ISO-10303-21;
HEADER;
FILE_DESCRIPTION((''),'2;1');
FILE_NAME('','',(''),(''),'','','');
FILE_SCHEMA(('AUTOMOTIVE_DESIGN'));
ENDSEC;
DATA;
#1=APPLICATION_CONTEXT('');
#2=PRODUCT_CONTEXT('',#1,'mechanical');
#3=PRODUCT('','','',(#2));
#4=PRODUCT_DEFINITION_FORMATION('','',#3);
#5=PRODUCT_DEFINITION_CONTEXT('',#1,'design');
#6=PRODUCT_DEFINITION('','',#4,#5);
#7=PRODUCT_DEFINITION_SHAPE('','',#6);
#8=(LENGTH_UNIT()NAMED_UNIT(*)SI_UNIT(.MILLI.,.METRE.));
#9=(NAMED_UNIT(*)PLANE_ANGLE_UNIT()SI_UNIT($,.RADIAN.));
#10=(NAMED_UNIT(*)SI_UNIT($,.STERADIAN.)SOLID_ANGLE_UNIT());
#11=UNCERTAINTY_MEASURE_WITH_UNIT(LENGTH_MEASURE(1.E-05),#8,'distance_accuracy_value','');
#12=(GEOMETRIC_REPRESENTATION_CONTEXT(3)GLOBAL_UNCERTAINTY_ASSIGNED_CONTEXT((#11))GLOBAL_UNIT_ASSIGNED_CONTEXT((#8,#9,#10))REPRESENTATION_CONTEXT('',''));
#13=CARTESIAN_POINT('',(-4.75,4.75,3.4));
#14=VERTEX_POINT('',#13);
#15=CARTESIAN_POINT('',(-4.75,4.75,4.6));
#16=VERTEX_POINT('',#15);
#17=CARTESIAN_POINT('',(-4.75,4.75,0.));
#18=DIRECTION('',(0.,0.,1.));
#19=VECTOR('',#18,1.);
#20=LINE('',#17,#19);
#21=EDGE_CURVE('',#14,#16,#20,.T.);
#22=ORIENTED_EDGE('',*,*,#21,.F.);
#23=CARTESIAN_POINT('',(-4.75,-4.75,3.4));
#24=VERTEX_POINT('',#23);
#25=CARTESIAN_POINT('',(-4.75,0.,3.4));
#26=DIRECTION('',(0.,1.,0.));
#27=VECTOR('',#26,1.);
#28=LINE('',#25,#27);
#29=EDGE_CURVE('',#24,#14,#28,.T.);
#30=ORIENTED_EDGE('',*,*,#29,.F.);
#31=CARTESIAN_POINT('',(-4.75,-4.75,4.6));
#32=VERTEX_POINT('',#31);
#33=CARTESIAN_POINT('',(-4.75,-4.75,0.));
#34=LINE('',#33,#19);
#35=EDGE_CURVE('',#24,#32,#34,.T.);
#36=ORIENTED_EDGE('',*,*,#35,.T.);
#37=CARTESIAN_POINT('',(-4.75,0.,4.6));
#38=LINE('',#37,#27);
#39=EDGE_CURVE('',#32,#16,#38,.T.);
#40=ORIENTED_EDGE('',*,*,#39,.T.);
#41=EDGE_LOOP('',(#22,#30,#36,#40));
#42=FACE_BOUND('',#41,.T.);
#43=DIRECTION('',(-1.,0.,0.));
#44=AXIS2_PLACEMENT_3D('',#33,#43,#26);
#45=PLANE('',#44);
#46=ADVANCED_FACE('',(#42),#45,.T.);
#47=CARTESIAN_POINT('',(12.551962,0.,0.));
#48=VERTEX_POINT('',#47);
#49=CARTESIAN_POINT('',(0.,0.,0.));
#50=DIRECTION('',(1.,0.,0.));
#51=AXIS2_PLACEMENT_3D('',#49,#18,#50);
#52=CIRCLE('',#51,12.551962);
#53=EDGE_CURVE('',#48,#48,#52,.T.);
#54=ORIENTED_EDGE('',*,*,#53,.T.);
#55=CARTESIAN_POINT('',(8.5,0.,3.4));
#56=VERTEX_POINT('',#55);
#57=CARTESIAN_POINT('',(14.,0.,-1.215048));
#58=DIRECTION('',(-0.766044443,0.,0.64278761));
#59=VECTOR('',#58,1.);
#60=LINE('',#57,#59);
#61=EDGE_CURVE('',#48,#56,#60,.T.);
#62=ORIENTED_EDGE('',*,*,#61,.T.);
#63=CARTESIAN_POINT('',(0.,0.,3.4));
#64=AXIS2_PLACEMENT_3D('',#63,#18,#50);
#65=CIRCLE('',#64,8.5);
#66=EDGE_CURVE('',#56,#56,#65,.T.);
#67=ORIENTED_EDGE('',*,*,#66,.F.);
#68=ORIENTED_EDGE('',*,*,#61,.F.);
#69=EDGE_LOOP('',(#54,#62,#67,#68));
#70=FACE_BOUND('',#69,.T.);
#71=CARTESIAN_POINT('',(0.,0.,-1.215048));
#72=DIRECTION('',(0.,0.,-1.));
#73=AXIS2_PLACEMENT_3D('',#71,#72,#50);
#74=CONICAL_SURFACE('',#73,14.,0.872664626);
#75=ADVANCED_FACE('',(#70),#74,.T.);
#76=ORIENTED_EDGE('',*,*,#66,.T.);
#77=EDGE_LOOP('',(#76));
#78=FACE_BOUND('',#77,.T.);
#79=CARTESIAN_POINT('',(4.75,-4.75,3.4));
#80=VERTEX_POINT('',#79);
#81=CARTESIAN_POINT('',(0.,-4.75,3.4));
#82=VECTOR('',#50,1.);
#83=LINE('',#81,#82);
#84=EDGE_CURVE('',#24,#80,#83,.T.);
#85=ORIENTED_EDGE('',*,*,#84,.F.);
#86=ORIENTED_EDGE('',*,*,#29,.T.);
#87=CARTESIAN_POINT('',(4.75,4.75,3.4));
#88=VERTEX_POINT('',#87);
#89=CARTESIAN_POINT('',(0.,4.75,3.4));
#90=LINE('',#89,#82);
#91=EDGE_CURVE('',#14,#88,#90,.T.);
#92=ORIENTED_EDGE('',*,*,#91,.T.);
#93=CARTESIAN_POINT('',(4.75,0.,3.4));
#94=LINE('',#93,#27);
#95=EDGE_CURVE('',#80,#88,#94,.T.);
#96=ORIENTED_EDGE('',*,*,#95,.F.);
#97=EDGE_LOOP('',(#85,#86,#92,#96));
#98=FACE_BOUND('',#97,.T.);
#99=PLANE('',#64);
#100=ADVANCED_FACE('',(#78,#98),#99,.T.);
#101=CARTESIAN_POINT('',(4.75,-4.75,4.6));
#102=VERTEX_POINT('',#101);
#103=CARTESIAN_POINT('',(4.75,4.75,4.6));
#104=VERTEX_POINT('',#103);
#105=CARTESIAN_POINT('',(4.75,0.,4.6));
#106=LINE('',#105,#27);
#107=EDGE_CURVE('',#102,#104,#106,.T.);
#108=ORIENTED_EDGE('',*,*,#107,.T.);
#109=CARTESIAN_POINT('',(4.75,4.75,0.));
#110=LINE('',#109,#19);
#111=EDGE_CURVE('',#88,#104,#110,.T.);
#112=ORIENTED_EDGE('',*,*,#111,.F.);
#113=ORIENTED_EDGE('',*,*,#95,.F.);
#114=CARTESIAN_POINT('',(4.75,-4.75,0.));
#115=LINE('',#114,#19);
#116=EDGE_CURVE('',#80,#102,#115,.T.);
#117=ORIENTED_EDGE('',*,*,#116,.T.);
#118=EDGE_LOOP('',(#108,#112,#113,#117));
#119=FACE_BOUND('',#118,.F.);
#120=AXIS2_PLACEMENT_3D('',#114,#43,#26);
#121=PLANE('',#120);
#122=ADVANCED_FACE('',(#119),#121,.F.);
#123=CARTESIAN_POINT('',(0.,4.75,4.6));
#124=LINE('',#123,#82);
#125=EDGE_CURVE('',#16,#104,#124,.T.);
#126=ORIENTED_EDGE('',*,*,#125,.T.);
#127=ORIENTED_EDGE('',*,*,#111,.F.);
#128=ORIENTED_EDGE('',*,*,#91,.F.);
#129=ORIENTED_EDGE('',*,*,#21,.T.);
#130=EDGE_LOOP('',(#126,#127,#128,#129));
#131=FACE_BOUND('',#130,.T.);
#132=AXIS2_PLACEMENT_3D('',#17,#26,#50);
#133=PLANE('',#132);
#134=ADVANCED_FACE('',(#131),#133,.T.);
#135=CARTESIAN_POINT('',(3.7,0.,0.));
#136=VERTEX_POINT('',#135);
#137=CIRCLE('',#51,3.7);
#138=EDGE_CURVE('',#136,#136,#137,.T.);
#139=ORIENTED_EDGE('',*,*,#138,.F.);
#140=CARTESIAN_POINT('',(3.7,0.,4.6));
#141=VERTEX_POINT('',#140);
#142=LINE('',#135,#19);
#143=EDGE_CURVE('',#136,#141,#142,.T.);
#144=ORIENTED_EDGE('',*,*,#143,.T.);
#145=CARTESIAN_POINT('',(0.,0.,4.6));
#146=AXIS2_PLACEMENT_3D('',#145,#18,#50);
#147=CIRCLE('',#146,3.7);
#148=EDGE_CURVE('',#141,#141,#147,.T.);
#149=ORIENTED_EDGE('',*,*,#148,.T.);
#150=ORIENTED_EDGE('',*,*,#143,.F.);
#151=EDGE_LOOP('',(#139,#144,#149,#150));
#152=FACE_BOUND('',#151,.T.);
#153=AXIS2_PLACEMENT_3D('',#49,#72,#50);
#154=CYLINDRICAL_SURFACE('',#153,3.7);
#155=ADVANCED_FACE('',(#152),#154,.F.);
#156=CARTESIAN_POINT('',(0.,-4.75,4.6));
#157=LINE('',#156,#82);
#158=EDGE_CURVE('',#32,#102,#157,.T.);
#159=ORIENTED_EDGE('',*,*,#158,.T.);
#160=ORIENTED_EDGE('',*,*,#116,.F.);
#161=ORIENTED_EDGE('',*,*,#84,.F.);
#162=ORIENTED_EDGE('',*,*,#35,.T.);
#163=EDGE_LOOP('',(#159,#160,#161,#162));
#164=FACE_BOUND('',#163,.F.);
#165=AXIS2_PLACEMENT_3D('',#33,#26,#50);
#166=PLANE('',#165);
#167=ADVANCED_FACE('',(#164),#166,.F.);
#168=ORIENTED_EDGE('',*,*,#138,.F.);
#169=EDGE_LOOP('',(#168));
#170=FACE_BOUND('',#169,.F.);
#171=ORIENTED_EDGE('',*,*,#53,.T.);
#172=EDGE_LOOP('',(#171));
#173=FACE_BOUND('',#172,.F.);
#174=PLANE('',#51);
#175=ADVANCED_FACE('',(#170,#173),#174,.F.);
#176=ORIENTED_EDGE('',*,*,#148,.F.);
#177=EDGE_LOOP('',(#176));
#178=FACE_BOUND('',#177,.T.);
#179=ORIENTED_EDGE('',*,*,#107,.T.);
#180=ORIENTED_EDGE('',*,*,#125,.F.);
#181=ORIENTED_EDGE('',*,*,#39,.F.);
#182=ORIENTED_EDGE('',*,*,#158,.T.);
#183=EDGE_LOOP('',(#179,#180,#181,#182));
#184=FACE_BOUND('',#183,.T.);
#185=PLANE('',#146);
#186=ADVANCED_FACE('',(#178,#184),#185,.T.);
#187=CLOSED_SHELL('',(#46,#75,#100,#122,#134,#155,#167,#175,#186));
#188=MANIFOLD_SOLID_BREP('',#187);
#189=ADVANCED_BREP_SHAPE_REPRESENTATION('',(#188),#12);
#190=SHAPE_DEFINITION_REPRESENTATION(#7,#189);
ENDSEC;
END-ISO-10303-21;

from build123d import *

# Parameters (mm, degrees)
F0_R     = 14
F0_W     = 9.5
F0_H     = 9.5
F1_DEPTH = 3.4
F0_R_2   = 3.7
F2_DEPTH = 4.6


# Not quite as in the source:
# - a fillet or chamfer that OpenCascade refuses, or shapes differently, is made with other operations: its cross-section is extruded or revolved along the edge and cut away or added


with BuildPart() as f1:
    # F0 (on Top) → F1 (new body)
    with BuildSketch(Plane.XY):
        Circle(F0_R)
        Rectangle(F0_W, F0_H, mode=Mode.SUBTRACT)
    extrude(amount=F1_DEPTH)

    # F0 (on Top) → F2 (join)
    with BuildSketch(Plane.XY):
        Rectangle(F0_W, F0_H)
        Circle(F0_R_2, mode=Mode.SUBTRACT)
    extrude(amount=F2_DEPTH)

    # F3: chamfer of 5.5 x 4.6150479715 on 1 edges, made by hand

    # F3_s1 → F3_t2 (revolve, cut)
    with BuildSketch(Plane.XZ):
        Polygon((14, -1.2150479715), (8.5, 3.4), (14, 3.4), align=None)
    revolve(axis=Axis((0, 0, 3.4), (0, 0, 1)), mode=Mode.SUBTRACT)


solid = f1.part
